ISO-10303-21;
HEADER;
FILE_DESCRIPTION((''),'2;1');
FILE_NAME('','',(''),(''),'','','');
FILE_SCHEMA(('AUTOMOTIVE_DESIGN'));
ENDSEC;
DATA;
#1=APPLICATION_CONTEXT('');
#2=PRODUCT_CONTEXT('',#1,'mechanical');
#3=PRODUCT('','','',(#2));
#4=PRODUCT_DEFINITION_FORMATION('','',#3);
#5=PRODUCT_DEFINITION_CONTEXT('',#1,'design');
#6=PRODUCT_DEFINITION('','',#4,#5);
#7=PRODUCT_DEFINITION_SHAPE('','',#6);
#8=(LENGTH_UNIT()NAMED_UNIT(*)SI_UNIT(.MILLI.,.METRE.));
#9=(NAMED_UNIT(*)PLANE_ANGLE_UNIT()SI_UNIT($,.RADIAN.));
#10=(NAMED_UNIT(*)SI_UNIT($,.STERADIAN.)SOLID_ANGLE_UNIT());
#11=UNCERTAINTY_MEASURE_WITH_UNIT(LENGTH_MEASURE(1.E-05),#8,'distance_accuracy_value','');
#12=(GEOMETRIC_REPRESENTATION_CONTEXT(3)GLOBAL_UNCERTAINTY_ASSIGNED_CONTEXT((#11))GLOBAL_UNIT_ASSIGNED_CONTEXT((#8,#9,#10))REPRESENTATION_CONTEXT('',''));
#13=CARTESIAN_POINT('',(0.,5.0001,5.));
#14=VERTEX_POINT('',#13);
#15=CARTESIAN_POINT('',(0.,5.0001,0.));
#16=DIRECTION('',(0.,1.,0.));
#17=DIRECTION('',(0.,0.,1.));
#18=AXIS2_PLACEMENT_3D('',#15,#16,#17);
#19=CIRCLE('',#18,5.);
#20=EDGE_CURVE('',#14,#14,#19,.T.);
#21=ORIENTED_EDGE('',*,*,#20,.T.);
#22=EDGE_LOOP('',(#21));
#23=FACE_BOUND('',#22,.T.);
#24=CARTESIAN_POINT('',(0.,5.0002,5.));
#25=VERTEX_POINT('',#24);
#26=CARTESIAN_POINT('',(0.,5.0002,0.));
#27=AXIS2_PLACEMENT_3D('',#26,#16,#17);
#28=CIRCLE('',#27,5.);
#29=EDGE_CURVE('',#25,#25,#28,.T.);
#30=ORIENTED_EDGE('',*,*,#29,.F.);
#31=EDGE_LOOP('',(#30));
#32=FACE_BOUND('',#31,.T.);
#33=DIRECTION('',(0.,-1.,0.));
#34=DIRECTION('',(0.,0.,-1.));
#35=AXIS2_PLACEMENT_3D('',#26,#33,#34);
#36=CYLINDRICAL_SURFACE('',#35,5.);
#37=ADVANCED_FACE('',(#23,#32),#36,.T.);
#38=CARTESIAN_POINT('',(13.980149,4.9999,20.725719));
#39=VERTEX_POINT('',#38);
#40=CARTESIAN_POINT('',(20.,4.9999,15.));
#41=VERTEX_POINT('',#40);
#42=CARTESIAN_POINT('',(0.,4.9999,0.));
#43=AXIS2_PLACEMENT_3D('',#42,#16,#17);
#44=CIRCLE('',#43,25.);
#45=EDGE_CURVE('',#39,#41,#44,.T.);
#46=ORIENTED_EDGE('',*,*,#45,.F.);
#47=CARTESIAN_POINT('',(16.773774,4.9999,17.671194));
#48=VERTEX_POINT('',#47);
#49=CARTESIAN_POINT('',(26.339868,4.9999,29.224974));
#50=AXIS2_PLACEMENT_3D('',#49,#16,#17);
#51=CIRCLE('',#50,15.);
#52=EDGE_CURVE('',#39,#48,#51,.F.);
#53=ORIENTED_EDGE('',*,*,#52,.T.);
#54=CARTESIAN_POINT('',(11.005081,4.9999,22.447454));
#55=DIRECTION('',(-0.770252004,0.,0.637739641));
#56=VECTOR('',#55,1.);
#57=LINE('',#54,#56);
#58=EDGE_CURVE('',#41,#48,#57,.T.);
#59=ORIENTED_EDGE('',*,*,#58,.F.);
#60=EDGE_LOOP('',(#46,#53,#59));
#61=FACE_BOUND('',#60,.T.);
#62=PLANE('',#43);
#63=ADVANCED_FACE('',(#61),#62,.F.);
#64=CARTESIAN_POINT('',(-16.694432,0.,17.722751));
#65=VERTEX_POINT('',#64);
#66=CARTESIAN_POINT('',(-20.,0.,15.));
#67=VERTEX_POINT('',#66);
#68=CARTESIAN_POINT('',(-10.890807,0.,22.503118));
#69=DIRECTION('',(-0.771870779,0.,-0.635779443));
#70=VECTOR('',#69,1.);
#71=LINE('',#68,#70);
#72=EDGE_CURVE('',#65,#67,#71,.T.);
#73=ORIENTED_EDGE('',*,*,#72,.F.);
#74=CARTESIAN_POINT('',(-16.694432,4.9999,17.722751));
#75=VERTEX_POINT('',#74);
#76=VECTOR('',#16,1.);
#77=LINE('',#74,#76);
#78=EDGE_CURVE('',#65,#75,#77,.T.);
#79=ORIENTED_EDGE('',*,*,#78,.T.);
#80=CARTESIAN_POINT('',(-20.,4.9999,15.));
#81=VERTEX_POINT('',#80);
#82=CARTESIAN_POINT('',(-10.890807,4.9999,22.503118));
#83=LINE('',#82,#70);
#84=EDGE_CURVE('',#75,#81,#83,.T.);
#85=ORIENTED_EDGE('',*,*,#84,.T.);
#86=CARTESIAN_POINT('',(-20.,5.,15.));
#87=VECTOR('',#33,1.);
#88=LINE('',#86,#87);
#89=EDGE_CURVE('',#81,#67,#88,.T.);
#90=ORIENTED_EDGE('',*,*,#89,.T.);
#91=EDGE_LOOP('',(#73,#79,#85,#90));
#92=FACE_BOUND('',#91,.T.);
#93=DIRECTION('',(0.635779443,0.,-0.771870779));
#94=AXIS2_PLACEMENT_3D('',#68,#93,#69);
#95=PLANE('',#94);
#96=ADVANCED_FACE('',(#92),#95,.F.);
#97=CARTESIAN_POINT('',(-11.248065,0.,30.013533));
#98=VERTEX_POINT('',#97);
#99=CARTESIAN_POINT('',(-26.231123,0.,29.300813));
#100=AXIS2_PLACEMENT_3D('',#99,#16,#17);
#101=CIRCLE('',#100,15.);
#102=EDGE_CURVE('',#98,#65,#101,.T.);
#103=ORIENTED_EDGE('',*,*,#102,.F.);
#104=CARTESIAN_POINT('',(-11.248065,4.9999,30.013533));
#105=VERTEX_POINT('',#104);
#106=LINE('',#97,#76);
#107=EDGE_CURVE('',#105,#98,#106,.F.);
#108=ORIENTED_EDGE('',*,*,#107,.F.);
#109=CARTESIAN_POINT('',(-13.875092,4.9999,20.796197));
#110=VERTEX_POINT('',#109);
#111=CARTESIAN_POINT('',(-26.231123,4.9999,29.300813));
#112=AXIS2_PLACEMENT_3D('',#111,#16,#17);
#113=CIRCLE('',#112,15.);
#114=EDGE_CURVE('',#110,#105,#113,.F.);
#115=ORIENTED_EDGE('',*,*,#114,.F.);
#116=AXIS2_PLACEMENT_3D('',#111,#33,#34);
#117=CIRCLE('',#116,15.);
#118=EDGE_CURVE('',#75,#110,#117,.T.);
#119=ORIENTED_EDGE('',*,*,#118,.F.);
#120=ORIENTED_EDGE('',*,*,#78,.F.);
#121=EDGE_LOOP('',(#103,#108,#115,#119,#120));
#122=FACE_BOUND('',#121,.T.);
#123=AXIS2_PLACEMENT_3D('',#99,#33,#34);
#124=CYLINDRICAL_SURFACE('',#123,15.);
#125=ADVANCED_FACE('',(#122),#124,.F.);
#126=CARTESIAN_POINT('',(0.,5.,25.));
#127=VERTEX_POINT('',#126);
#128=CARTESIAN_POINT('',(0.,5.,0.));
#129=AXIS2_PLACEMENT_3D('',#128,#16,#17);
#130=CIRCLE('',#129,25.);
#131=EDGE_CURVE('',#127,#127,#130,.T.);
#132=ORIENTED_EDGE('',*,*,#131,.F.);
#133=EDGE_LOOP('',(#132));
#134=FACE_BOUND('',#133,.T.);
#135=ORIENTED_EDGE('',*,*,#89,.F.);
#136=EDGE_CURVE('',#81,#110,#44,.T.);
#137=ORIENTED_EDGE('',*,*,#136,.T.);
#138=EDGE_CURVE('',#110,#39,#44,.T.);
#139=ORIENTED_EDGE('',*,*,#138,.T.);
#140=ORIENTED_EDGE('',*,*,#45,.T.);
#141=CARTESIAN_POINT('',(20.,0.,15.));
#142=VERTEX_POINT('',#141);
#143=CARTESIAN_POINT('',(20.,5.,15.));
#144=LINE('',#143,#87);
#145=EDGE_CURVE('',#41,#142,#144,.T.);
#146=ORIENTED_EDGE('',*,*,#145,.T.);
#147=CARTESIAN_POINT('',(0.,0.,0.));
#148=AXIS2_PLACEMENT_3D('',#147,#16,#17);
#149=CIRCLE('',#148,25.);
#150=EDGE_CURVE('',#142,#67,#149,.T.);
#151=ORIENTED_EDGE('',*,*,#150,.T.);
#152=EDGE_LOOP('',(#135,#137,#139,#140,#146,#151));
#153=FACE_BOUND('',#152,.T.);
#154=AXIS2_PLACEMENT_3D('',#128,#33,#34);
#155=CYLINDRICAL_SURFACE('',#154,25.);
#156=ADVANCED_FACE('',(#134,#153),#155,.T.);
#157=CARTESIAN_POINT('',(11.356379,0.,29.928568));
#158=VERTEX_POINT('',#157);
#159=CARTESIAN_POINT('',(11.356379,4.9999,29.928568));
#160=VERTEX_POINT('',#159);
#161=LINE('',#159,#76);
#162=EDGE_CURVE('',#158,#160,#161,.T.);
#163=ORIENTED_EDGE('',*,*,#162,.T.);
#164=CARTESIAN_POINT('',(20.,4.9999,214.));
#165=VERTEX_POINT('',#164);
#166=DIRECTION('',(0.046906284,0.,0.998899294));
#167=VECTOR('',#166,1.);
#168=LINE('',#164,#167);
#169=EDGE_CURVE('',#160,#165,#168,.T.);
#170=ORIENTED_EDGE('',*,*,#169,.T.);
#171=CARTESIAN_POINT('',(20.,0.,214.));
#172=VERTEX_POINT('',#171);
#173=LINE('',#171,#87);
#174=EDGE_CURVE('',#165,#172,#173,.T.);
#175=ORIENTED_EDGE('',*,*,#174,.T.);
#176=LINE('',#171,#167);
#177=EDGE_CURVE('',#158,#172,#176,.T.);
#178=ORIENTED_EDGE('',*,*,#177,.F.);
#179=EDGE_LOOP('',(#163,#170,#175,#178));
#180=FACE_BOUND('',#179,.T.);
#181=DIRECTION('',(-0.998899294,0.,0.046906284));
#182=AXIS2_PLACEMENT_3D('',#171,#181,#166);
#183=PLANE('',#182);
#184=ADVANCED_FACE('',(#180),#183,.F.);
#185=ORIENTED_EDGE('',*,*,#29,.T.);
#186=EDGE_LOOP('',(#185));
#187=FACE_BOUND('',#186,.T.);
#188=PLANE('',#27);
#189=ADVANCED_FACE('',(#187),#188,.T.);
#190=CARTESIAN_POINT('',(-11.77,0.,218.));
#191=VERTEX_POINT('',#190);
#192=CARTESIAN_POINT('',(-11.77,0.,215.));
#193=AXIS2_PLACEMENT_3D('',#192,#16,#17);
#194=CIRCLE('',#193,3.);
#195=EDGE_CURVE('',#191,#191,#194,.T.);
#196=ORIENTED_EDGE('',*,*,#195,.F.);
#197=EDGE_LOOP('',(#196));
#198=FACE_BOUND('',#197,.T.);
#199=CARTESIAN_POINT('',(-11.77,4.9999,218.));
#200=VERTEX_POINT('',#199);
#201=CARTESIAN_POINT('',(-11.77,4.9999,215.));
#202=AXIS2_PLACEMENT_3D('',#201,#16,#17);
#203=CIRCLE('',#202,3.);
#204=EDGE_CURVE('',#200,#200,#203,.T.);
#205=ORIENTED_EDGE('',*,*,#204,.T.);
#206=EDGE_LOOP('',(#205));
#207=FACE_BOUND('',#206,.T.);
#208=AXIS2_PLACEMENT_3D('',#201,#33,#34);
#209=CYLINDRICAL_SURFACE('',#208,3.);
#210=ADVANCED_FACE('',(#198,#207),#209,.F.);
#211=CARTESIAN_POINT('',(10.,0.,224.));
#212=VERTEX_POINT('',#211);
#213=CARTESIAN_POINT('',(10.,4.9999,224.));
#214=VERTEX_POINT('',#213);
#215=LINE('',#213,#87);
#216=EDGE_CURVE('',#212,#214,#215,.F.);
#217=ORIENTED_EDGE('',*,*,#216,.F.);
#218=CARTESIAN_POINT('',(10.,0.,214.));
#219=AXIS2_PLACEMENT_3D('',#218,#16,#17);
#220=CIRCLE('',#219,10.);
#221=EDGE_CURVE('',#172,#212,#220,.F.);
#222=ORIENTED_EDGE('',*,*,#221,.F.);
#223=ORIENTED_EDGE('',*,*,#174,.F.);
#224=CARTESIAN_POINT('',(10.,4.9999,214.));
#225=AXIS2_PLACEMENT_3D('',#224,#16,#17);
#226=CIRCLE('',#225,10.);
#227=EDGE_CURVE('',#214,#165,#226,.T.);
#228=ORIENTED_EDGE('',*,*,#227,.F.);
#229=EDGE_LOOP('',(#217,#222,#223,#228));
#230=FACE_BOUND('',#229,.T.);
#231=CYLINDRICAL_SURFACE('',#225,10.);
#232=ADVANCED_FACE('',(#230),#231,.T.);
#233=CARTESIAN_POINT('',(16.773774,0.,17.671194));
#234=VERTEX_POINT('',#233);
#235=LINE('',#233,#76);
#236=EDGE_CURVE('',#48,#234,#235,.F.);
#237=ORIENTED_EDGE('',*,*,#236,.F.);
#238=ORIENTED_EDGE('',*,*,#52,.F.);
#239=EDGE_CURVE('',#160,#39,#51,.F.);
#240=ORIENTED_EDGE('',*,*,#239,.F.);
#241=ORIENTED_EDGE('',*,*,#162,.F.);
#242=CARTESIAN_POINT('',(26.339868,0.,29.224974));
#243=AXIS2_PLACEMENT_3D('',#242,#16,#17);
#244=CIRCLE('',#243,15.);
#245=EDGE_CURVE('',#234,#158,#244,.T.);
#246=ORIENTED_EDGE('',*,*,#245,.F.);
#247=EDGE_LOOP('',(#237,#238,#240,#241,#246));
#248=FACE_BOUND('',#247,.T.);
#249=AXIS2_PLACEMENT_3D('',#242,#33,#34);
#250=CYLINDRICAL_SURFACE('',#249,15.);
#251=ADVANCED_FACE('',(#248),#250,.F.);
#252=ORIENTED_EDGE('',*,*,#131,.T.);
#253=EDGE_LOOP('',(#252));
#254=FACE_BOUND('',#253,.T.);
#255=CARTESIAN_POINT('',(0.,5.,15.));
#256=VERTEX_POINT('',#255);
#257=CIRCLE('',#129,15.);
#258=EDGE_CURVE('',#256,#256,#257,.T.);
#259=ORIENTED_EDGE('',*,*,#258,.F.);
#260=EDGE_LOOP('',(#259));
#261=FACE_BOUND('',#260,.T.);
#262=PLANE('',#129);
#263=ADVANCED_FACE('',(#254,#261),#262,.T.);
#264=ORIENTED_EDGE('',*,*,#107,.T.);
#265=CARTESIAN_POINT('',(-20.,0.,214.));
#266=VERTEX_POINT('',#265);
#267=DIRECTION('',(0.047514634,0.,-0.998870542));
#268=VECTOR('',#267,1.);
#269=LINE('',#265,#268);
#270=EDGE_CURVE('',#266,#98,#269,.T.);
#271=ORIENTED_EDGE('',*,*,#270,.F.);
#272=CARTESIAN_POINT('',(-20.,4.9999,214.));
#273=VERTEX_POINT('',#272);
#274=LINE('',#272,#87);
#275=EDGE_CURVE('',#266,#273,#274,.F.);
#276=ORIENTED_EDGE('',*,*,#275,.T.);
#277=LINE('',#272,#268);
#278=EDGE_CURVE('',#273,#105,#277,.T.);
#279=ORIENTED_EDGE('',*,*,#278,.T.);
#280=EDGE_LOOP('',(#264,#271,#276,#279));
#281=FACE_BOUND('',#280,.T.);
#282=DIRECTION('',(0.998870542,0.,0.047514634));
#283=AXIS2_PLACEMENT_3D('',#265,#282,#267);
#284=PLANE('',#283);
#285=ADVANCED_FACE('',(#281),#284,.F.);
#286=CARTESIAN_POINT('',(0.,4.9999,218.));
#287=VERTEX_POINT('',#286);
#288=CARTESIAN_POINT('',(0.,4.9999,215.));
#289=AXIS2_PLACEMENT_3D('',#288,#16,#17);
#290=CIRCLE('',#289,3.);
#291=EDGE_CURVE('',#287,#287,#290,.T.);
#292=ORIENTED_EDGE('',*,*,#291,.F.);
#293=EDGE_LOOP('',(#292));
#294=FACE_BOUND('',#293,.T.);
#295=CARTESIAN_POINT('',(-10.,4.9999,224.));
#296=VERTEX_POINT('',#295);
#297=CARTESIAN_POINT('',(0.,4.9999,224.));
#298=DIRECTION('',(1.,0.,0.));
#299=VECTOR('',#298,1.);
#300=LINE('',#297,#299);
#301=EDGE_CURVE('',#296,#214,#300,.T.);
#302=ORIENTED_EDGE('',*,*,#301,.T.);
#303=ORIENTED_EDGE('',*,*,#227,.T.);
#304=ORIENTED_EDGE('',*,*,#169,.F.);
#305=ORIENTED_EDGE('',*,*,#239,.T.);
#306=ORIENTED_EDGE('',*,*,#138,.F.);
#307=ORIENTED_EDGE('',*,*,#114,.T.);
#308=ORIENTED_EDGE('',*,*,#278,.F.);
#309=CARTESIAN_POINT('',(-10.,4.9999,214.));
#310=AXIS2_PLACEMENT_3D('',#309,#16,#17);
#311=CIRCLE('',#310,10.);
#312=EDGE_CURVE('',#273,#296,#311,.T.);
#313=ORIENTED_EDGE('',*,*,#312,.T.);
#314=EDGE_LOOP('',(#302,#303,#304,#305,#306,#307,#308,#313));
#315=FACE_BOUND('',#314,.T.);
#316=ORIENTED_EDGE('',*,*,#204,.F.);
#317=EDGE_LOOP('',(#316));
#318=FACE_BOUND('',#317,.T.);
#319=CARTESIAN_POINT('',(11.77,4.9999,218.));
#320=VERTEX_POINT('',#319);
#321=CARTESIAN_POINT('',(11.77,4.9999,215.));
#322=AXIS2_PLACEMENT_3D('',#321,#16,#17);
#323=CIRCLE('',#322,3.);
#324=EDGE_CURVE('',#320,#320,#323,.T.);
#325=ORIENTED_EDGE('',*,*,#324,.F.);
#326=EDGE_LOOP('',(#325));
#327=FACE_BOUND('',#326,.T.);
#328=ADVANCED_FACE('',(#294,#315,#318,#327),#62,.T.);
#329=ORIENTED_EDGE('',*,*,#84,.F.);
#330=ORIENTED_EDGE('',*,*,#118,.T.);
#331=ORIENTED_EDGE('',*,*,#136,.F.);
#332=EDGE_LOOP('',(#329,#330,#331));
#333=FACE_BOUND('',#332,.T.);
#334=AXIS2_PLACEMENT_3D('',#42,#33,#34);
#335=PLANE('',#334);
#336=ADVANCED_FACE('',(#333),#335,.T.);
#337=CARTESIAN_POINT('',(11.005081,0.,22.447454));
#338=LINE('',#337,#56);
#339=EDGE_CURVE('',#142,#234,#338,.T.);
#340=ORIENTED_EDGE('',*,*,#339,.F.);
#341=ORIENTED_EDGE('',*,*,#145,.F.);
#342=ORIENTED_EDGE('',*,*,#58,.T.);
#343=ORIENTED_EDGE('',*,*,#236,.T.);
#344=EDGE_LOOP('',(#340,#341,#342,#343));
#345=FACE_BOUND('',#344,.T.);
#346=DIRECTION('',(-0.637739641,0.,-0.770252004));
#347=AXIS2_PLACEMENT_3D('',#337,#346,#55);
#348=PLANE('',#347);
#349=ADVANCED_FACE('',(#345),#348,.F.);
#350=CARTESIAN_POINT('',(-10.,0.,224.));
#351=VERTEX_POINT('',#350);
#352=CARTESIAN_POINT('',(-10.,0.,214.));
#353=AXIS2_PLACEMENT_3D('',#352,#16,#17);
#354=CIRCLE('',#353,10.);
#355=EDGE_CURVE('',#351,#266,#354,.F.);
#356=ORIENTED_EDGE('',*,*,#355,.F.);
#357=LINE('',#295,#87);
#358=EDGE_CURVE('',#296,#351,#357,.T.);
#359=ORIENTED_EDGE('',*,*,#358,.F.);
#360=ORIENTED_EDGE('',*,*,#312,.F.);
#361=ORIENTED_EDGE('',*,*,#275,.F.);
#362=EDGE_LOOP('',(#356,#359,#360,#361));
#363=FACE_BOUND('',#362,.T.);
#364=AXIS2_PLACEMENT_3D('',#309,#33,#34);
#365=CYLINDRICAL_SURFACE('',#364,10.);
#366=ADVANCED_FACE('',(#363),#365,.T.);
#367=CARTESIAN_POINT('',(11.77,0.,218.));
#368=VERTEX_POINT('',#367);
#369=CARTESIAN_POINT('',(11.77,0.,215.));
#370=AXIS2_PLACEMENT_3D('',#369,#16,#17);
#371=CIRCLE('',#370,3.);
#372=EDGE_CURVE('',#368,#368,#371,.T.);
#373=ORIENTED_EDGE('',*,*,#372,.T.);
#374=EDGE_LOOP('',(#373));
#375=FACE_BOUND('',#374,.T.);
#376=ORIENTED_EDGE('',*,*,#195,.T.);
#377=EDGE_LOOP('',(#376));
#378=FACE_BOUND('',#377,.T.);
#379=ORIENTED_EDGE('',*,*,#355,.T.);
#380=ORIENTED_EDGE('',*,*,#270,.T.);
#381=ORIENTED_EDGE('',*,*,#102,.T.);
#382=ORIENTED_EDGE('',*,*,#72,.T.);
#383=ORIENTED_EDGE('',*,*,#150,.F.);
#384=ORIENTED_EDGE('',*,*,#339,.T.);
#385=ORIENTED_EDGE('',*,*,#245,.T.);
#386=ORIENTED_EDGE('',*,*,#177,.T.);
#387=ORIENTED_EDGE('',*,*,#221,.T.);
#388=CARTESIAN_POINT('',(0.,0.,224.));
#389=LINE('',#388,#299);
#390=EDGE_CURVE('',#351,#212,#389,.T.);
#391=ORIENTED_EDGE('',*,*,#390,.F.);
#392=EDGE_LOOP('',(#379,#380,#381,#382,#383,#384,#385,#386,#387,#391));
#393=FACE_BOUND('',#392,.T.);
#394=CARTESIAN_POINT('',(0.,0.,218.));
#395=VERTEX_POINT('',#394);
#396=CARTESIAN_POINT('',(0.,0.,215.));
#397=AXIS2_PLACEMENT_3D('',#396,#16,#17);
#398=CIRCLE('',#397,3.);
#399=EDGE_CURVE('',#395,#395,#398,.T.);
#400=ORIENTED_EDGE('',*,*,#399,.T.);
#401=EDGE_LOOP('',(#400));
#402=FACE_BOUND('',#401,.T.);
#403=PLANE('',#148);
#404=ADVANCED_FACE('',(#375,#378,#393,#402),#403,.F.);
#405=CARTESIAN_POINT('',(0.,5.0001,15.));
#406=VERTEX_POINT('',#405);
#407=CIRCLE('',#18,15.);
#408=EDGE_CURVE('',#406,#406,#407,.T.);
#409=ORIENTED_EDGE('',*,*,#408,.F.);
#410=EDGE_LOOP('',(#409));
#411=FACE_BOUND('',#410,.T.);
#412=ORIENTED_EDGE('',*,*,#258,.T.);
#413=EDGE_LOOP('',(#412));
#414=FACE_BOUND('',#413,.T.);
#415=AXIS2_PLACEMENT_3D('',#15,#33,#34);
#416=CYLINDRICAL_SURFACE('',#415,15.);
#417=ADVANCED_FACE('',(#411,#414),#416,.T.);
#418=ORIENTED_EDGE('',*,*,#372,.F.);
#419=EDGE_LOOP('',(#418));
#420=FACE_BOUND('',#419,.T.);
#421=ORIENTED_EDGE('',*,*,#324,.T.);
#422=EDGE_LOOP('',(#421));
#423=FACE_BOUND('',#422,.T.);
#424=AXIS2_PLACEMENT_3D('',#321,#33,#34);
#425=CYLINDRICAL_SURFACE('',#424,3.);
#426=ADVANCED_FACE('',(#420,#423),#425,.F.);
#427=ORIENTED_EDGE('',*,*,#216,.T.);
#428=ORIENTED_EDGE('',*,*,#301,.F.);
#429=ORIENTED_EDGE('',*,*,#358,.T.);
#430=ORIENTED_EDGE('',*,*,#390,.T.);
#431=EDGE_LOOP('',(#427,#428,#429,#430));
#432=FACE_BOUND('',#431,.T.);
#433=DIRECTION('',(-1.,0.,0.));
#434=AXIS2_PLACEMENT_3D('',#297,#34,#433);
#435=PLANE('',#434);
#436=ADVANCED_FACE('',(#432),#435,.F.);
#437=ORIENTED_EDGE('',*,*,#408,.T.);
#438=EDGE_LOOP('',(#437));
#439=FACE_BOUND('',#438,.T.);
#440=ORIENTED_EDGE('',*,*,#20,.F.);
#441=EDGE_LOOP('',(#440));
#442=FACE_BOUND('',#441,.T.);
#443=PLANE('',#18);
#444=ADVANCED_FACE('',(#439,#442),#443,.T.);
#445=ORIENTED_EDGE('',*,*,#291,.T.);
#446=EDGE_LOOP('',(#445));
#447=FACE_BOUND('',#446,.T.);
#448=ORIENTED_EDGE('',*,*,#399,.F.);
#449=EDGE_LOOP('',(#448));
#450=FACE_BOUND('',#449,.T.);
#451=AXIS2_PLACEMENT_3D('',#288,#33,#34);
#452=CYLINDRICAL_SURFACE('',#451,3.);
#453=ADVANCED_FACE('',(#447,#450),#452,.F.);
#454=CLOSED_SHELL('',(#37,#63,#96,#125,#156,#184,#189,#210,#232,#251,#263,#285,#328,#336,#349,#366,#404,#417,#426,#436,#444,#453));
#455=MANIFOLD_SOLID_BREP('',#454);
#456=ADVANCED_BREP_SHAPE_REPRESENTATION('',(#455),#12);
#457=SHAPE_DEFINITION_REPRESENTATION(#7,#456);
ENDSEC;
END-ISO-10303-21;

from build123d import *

# Parameters (mm, degrees)
SKETCH2_R           = 25
BOSS_EXTRUDE2_DEPTH = 5
SKETCH3_R           = 15
BOSS_EXTRUDE3_DEPTH = 0.0001
SKETCH4_R           = 5
BOSS_EXTRUDE4_DEPTH = 0.0001
SKETCH20_R          = 3
BOSS_EXTRUDE8_DEPTH = 4.9999
FILLET6_R           = 10
CUT_EXTRUDE4_DEPTH  = 4.9999
FILLET8_R           = 15


with BuildPart() as part:
    # Sketch2 → Boss-Extrude2 (new body)
    with BuildSketch(Plane(origin=(0, 0, 0), x_dir=(1, 0, 0), z_dir=(0, 1, 0))):
        with Locations(Location((0, 0, 0), (0, 0, 270))):
            Circle(SKETCH2_R)
    extrude(amount=BOSS_EXTRUDE2_DEPTH)

    # Sketch3 → Boss-Extrude3 (add)
    with BuildSketch(Plane(origin=(0, 5, 0), x_dir=(1, 0, 0), z_dir=(0, 1, 0))):
        with Locations(Location((0, 0, 0), (0, 0, 270))):
            Circle(SKETCH3_R)
    extrude(amount=BOSS_EXTRUDE3_DEPTH)

    # Sketch4 → Boss-Extrude4 (add)
    with BuildSketch(Plane(origin=(0, 5.0001, 0), x_dir=(1, 0, 0), z_dir=(0, 1, 0))):
        with Locations(Location((0, 0, 0), (0, 0, 270))):
            Circle(SKETCH4_R)
    extrude(amount=BOSS_EXTRUDE4_DEPTH)

    # Sketch20 → Boss-Extrude8 (add)
    with BuildSketch(Plane(origin=(0, 0, 0), x_dir=(1, 0, 0), z_dir=(0, 1, 0))):
        Polygon((20, 0), (20, -224), (-20, -224), (-20, 0), (0, 0), align=None)
        with Locations(Location((-11.77, -215, 0), (0, 0, 270))):
            Circle(SKETCH20_R, mode=Mode.SUBTRACT)
        with Locations(Location((11.77, -215, 0), (0, 0, 270))):
            Circle(SKETCH20_R, mode=Mode.SUBTRACT)
        with Locations(Location((0, -215, 0), (0, 0, 270))):
            Circle(SKETCH20_R, mode=Mode.SUBTRACT)
    extrude(amount=BOSS_EXTRUDE8_DEPTH)

    # Fillet6
    fillet6_edges = [part.edges().sort_by_distance(p)[0] for p in [
        (20, 2.49995, 224),
        (-20, 2.49995, 224),
    ]]
    fillet(fillet6_edges, radius=FILLET6_R)

    # Sketch21 → Cut-Extrude4 (cut)
    with BuildSketch(Plane(origin=(0, 4.9999, 0), x_dir=(1, 0, 0), z_dir=(0, 1, 0))):
        Polygon((20, -214), (11.00508109, -22.44745398), (20, -15), align=None)
        Polygon((-20, -214), (-10.890807236, -22.503117956), (-20, -15), align=None)
    extrude(amount=-CUT_EXTRUDE4_DEPTH, mode=Mode.SUBTRACT)

    # Fillet8
    # the kernel refuses this fillet: 15 mm, written as the material it adds along each edge
    with BuildSketch(Plane(origin=(11.00508109, 4.9999, 22.44745398), x_dir=(0.7702520044264655, 0, -0.6377396409797748), z_dir=(0, -1, 0))) as fillet8_piece_1:
        with BuildLine():
            CenterArc((FILLET8_R * 0.499290509881, FILLET8_R), FILLET8_R, 216.934957366, 53.065042634)
            Line((-FILLET8_R * 0.300027670723, FILLET8_R * 0.399091981951), (0, 0))
            Line((0, 0), (FILLET8_R * 0.499290509881, 0))
        make_face()
    extrude(amount=4.9999)
    with BuildSketch(Plane(origin=(-10.890807236, 4.9999, 22.503117956), x_dir=(-0.04751463426257685, 0, 0.9988705419276782), z_dir=(0, -1, 0))) as fillet8_piece_2:
        with BuildLine():
            CenterArc((FILLET8_R * 0.501260466094, FILLET8_R), FILLET8_R, 216.754404895, 53.245595105)
            Line((-FILLET8_R * 0.299947345081, FILLET8_R * 0.401613800867), (0, 0))
            Line((0, 0), (FILLET8_R * 0.501260466094, 0))
        make_face()
    extrude(amount=4.9999)


solid = part.part
